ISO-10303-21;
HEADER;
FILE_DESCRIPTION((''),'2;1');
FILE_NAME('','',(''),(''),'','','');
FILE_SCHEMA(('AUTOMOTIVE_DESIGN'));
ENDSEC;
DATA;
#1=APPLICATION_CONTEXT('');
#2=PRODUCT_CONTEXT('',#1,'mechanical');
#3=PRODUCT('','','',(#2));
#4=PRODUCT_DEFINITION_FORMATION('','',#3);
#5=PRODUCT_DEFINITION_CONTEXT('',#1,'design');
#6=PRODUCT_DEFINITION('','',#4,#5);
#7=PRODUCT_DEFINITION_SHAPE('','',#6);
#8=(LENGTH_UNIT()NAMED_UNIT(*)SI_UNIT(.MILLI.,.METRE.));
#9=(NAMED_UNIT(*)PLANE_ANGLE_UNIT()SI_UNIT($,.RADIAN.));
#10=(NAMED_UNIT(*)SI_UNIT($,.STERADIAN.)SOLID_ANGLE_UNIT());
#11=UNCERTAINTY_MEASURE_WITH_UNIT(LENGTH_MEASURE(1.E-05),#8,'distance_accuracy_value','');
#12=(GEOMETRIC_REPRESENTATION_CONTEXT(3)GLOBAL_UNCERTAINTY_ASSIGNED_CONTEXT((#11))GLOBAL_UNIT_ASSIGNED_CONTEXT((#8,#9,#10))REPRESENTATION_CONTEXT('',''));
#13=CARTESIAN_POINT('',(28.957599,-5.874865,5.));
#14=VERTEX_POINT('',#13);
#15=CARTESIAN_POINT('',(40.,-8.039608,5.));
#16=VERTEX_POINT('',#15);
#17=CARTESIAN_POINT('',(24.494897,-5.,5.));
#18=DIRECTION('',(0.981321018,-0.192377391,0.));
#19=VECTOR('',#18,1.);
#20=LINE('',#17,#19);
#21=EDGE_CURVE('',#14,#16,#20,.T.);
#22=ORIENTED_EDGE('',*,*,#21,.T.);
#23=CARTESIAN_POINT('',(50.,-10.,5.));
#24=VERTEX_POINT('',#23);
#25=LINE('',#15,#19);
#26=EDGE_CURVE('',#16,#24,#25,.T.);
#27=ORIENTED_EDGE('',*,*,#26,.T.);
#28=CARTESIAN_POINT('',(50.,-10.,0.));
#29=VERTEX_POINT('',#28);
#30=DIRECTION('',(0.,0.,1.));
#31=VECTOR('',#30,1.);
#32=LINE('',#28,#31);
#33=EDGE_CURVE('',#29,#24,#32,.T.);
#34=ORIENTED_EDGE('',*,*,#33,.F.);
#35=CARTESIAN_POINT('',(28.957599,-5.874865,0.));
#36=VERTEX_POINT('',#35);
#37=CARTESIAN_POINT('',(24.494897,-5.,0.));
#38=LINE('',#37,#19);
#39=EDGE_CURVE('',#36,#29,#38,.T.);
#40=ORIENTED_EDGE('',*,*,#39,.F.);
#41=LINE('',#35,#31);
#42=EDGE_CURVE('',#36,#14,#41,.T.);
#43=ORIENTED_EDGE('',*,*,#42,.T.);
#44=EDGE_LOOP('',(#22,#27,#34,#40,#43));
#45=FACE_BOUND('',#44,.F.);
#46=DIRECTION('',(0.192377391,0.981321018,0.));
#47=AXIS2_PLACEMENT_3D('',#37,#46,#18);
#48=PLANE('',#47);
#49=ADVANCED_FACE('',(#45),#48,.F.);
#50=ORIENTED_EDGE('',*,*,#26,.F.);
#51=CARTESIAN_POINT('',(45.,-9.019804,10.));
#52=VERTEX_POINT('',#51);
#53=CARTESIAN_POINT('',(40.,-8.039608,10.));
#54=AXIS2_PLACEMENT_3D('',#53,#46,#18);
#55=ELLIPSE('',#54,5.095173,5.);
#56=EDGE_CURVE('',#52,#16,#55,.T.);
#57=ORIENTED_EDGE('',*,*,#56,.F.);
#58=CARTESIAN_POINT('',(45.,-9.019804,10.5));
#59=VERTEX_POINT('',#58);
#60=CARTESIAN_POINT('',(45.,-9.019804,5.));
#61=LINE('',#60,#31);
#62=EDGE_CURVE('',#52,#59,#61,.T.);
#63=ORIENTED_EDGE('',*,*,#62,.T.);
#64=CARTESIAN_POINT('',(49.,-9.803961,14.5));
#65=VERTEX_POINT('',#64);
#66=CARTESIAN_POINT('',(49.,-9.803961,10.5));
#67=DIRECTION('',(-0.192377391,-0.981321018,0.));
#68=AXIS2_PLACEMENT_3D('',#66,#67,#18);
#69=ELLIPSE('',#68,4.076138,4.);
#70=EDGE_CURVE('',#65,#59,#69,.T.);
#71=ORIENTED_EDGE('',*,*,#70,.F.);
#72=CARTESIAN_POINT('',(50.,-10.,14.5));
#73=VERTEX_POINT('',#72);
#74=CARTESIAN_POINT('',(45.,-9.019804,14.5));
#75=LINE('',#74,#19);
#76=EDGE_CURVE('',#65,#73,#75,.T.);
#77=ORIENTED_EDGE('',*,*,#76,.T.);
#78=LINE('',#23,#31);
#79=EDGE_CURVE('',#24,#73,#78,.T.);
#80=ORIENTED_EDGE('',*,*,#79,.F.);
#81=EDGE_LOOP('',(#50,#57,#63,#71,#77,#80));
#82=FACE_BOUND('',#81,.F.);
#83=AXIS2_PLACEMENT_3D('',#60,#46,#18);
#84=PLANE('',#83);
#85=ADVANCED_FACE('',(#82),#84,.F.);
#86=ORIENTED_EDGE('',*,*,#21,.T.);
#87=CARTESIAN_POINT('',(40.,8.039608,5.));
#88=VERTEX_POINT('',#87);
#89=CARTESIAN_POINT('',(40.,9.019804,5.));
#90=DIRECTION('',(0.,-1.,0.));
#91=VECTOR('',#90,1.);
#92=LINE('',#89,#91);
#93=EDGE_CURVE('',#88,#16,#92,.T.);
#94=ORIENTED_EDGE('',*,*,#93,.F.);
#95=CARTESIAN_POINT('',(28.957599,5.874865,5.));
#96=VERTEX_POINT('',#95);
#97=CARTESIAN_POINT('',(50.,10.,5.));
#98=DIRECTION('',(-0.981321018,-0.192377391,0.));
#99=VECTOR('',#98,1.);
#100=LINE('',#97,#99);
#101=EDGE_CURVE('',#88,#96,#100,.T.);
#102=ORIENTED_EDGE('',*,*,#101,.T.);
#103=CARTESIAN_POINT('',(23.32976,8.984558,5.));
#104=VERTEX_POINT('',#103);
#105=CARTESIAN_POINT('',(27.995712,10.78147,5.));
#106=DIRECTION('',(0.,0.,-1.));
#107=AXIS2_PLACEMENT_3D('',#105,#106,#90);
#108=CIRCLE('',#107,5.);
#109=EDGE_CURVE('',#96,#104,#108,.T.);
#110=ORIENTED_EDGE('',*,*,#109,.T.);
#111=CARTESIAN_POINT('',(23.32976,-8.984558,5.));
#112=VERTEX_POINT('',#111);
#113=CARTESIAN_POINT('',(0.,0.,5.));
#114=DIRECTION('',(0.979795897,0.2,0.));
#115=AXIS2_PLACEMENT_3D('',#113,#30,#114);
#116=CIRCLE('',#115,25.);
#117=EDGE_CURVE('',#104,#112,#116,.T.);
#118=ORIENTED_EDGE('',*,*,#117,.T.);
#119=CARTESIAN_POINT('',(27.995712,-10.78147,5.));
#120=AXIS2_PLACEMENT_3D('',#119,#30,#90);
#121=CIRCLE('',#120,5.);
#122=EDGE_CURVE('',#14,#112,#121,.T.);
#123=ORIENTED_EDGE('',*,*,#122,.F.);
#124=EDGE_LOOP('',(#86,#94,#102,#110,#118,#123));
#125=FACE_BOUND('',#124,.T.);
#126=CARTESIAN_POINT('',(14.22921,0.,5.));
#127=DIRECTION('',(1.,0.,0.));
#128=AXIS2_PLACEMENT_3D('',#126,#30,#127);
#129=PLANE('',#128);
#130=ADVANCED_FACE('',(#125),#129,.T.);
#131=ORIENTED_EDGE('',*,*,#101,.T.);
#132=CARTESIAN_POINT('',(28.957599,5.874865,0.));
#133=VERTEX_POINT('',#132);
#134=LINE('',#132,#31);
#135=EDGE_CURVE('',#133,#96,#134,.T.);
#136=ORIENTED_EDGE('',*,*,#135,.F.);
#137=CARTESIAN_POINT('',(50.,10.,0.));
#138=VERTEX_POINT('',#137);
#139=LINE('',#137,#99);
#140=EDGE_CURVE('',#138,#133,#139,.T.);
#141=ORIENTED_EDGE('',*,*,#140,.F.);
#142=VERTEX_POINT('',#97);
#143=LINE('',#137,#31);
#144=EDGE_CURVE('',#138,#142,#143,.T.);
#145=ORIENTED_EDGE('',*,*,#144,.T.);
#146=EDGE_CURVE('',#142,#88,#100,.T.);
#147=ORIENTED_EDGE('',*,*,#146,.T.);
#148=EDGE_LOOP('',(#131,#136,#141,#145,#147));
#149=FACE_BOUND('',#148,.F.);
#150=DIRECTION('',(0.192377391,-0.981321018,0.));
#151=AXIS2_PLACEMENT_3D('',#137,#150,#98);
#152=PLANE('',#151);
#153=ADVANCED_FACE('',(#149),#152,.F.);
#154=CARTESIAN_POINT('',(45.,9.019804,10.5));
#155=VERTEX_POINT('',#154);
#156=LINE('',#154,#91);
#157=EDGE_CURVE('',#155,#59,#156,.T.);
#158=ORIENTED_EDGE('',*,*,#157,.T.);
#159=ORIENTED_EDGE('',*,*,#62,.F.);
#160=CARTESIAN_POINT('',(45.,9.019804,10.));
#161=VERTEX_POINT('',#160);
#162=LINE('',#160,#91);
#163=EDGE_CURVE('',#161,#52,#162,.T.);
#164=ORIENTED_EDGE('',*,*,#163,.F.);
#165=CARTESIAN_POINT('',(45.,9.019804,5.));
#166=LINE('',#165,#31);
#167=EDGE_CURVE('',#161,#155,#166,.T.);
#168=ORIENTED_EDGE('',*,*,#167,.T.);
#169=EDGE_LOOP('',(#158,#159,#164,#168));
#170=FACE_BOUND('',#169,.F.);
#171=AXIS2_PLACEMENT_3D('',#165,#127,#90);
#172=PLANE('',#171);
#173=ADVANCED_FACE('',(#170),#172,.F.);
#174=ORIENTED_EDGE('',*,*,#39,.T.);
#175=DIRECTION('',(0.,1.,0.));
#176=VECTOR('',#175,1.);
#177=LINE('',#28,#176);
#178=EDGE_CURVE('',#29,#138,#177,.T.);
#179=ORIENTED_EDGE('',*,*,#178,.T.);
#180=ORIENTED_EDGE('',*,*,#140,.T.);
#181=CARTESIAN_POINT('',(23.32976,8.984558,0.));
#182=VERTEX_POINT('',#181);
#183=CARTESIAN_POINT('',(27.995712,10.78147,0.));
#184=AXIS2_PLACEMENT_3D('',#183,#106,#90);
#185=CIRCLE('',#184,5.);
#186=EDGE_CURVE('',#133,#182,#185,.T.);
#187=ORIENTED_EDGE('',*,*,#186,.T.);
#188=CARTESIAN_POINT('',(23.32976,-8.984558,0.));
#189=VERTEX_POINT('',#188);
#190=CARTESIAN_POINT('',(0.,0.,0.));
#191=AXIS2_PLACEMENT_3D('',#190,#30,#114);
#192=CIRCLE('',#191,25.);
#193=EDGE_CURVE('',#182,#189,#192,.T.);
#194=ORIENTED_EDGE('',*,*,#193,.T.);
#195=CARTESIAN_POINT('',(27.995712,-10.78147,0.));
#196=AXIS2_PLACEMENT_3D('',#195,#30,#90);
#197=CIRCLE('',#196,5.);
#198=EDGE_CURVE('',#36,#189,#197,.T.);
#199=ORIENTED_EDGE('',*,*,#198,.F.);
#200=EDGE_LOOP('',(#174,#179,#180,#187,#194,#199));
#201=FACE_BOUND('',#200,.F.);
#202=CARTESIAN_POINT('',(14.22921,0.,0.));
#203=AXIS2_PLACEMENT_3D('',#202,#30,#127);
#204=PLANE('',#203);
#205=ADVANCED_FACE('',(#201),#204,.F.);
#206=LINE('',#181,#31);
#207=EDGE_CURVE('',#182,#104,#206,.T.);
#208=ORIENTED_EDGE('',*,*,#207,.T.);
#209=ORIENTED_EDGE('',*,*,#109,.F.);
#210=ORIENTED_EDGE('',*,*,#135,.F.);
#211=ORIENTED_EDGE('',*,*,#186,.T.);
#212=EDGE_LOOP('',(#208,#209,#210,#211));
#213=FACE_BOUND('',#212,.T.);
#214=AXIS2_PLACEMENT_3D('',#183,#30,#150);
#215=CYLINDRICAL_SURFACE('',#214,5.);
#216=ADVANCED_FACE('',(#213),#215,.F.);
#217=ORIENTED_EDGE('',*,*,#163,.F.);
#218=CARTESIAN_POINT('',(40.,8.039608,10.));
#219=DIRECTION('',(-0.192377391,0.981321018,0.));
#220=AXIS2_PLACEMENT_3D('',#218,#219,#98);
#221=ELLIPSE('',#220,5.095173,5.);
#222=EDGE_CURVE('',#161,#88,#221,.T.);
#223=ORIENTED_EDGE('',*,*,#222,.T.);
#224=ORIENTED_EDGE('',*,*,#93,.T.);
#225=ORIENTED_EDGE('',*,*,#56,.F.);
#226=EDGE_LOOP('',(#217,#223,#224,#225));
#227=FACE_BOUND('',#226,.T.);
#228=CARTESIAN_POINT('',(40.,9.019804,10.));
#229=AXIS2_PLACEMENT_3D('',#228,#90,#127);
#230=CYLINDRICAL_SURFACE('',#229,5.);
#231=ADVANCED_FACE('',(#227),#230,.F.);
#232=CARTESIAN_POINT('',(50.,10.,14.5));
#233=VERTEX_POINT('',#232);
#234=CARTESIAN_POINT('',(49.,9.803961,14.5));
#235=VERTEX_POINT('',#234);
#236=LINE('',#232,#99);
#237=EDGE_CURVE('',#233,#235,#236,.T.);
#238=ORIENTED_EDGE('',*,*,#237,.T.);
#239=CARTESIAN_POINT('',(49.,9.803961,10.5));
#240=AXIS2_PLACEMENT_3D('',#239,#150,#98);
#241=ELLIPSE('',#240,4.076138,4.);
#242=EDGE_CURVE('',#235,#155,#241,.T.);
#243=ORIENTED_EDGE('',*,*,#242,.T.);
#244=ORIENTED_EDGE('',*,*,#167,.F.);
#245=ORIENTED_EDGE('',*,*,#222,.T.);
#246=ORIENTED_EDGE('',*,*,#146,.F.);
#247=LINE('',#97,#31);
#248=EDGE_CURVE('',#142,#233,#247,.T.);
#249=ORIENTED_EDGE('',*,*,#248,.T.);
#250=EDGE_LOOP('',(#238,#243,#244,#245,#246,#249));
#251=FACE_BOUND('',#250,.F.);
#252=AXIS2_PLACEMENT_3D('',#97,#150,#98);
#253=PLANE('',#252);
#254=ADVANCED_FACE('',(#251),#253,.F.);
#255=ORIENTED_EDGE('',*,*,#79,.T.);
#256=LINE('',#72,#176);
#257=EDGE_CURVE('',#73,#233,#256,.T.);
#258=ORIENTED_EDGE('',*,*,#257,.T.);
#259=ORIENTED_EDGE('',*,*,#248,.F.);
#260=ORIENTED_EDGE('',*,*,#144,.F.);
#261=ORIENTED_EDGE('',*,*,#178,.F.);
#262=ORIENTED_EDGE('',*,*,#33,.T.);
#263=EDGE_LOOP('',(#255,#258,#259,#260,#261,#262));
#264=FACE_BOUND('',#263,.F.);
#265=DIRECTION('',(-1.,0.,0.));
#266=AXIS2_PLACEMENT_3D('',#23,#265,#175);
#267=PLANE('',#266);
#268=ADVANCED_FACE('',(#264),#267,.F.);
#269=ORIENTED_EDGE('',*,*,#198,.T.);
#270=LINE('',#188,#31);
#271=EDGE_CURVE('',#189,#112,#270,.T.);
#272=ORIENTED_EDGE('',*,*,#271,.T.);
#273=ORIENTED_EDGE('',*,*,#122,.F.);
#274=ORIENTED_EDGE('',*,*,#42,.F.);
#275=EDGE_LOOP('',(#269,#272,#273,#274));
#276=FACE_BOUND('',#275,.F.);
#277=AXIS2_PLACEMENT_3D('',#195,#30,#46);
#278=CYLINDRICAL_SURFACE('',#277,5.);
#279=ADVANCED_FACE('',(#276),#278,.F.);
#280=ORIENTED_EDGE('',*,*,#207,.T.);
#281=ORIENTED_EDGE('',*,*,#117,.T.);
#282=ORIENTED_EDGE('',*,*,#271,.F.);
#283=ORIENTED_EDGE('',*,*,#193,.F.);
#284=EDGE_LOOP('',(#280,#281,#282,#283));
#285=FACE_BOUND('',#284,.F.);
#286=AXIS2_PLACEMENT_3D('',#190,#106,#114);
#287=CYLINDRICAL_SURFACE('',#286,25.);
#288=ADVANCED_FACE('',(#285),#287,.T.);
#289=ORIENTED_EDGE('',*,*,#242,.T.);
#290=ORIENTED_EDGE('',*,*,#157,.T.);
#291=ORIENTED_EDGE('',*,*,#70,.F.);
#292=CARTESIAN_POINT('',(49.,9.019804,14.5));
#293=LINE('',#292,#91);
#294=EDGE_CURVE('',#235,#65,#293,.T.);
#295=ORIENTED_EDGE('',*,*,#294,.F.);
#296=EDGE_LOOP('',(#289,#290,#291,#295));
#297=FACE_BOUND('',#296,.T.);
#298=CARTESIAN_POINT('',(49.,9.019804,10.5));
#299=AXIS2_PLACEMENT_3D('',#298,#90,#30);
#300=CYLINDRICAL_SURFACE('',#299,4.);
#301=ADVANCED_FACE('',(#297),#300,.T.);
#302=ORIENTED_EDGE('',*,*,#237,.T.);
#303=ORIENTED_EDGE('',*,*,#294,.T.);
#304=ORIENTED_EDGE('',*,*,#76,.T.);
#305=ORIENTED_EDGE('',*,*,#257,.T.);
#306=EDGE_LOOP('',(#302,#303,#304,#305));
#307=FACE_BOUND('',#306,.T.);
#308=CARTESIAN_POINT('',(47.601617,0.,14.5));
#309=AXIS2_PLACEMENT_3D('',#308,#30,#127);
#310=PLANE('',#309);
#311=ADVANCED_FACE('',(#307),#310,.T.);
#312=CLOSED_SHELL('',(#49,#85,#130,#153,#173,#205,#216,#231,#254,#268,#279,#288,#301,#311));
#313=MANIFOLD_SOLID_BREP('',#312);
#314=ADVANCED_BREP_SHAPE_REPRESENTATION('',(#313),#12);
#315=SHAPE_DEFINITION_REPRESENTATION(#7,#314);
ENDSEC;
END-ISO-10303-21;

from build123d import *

# Parameters (mm, degrees)
F1_DEPTH = 5
F3_DEPTH = 9.5
F4_R     = 5
F5_R     = 4


# Not quite as in the source:
# - a feature names something its author has since deleted; it is built from what else it names


with BuildPart() as f1:
    # F0 (on Top) → F1 (new body)
    with BuildSketch(Plane.XY):
        with BuildLine():
            Line((50, 10), (24.4948974278, 5))
            ThreePointArc((24.4948974278, 5), (-25, 0), (24.4948974278, -5))
            Line((24.4948974278, -5), (50, -10))
            Line((50, -10), (50, 10))
        make_face()
    extrude(amount=F1_DEPTH)

    # F2 (on face) → F3 (join)
    with BuildSketch(Plane.XY.offset(5)):
        Polygon((50, -10), (50, 10), (45, 9.0198039812), (45, -9.0198039812), align=None)
    extrude(amount=F3_DEPTH)

    # F4
    f4_edges = [f1.edges().sort_by_distance(p)[0] for p in [
        (45, 0, 5),
        (24.494897, -5, 2.5),
        (24.494897, 5, 2.5),
    ]]
    fillet(f4_edges, radius=F4_R)

    # F5
    f5_edges = [f1.edges().sort_by_distance(p)[0] for p in [
        (45, 0, 14.5),
    ]]
    fillet(f5_edges, radius=F5_R)


solid = f1.part
